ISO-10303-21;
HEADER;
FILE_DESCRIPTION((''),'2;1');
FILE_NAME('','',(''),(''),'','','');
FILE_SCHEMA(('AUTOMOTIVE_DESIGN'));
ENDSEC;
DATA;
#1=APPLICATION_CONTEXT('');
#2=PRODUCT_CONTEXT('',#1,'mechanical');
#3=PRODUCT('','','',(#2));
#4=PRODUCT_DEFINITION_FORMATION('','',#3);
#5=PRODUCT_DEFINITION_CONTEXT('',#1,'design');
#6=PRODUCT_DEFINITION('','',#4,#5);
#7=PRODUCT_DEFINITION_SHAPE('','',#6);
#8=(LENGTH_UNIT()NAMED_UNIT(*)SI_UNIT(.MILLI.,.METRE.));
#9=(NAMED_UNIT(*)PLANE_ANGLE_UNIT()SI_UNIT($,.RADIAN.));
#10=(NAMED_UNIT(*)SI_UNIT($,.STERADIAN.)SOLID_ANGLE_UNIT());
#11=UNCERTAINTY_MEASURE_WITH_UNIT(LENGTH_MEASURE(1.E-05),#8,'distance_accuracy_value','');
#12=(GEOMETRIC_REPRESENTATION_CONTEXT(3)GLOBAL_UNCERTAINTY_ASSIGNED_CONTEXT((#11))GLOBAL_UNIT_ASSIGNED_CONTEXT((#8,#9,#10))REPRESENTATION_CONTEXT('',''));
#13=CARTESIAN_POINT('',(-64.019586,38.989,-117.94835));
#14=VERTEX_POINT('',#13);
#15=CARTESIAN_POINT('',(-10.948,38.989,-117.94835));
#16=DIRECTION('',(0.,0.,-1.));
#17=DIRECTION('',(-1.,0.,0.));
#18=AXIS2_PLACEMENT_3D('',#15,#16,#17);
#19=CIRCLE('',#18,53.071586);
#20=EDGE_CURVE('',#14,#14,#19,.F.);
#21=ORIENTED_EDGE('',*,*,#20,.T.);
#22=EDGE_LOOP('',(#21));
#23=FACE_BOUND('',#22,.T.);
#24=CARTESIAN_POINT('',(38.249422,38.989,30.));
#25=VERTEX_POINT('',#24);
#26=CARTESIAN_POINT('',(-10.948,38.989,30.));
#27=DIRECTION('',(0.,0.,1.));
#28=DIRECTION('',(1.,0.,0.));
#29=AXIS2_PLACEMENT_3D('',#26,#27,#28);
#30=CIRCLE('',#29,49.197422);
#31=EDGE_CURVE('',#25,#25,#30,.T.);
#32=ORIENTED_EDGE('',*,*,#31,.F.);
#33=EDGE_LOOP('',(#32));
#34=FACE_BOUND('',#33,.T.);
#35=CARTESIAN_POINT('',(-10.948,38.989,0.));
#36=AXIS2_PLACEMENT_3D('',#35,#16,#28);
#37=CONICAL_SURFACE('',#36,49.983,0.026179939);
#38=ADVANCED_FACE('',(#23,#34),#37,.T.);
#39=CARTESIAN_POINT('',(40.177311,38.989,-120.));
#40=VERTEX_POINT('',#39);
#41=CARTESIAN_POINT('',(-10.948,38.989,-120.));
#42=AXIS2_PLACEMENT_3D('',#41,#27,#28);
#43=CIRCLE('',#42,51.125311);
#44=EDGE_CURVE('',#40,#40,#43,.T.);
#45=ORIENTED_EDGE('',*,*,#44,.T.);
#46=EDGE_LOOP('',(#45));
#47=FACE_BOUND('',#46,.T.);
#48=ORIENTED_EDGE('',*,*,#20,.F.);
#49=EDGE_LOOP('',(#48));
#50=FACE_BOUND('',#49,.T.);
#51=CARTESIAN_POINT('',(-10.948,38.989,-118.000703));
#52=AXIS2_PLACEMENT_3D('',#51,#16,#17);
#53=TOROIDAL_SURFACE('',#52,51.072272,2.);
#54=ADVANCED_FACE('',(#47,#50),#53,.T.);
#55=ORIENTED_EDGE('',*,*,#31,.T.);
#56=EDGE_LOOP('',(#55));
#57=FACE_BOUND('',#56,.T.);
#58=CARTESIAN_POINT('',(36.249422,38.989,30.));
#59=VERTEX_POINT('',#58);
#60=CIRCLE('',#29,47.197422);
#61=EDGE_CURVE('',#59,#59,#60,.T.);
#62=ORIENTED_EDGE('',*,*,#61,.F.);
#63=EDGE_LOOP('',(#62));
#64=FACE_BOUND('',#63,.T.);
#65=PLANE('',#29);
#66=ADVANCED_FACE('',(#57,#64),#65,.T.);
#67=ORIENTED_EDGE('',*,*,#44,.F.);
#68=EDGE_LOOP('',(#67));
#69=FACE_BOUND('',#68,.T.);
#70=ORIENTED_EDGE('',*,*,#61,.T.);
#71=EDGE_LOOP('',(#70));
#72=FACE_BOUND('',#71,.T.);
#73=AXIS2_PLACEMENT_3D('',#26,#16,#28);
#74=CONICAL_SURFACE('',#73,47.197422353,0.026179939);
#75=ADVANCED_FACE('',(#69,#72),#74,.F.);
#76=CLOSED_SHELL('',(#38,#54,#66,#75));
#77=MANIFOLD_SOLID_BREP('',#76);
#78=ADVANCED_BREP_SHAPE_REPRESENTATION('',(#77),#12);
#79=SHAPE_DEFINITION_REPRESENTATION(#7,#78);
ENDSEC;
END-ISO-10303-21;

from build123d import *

# Parameters (mm, degrees)
SKETCH2_R                 = 49.983
MAIN_PART_DEPTH           = 30
MAIN_PART_TAPER           = 1.5
MAIN_PART_OTHER_WAY_DEPTH = 120
MAIN_PART_OTHER_WAY_TAPER = -1.5
SKETCH3_R                 = 47.197422353
MAINCUT_DEPTH             = 150
MAINCUT_DRAFT             = 1.5
FILLET1_R                 = 2


with BuildPart() as part:
    # Sketch2 → Main part (new body)
    with BuildSketch(Plane.XY):
        with Locations((-10.948, 38.989)):
            Circle(SKETCH2_R)
    extrude(amount=MAIN_PART_DEPTH, taper=MAIN_PART_TAPER)

    # Sketch2 → Main part other way (add)
    with BuildSketch(Plane.XY):
        with Locations((-10.948, 38.989)):
            Circle(SKETCH2_R)
    extrude(amount=-MAIN_PART_OTHER_WAY_DEPTH, taper=MAIN_PART_OTHER_WAY_TAPER)


with BuildPart() as maincut_tool:
    # Sketch3 → MainCut (with draft: the straight prism first)
    with BuildSketch(Plane.XY.offset(30)):
        with Locations((-10.948, 38.989)):
            Circle(SKETCH3_R)
    extrude(amount=-MAINCUT_DEPTH)
    # MainCut: the draft: its side faces are tilted about the plane it starts from
    maincut_sides = [maincut_tool.faces().sort_by_distance(p)[0] for p in [
        (-58.145422353, 38.989, -45),
    ]]
    draft(maincut_sides, Plane.XY.offset(30), MAINCUT_DRAFT)


with BuildPart() as part_1:
    add(part.part)

    # MainCut: cut by maincut_tool
    add(maincut_tool.part, mode=Mode.SUBTRACT)

    # Fillet1
    # the kernel refuses this fillet: 2 mm, written as the material it takes off along each edge
    with BuildSketch(Plane(origin=(-10.948, 38.989, -120), x_dir=(1, 0, 0), z_dir=(0, -1, 0))) as fillet1_piece_1:
        with BuildLine():
            CenterArc((53.125310588 - FILLET1_R * 1.02652871406, FILLET1_R), FILLET1_R, 270, 91.5)
            Line((53.125310588 - FILLET1_R * 1.02652871406, 0), (53.125310588, 0))
            Line((53.125310588, 0), (53.125310588 - FILLET1_R * 0.0268713890845, FILLET1_R * 1.02617694831))
        make_face()
    revolve(axis=Axis((-10.948, 38.989, -120), (0, 0, 1)), mode=Mode.SUBTRACT)


solid = part_1.part
